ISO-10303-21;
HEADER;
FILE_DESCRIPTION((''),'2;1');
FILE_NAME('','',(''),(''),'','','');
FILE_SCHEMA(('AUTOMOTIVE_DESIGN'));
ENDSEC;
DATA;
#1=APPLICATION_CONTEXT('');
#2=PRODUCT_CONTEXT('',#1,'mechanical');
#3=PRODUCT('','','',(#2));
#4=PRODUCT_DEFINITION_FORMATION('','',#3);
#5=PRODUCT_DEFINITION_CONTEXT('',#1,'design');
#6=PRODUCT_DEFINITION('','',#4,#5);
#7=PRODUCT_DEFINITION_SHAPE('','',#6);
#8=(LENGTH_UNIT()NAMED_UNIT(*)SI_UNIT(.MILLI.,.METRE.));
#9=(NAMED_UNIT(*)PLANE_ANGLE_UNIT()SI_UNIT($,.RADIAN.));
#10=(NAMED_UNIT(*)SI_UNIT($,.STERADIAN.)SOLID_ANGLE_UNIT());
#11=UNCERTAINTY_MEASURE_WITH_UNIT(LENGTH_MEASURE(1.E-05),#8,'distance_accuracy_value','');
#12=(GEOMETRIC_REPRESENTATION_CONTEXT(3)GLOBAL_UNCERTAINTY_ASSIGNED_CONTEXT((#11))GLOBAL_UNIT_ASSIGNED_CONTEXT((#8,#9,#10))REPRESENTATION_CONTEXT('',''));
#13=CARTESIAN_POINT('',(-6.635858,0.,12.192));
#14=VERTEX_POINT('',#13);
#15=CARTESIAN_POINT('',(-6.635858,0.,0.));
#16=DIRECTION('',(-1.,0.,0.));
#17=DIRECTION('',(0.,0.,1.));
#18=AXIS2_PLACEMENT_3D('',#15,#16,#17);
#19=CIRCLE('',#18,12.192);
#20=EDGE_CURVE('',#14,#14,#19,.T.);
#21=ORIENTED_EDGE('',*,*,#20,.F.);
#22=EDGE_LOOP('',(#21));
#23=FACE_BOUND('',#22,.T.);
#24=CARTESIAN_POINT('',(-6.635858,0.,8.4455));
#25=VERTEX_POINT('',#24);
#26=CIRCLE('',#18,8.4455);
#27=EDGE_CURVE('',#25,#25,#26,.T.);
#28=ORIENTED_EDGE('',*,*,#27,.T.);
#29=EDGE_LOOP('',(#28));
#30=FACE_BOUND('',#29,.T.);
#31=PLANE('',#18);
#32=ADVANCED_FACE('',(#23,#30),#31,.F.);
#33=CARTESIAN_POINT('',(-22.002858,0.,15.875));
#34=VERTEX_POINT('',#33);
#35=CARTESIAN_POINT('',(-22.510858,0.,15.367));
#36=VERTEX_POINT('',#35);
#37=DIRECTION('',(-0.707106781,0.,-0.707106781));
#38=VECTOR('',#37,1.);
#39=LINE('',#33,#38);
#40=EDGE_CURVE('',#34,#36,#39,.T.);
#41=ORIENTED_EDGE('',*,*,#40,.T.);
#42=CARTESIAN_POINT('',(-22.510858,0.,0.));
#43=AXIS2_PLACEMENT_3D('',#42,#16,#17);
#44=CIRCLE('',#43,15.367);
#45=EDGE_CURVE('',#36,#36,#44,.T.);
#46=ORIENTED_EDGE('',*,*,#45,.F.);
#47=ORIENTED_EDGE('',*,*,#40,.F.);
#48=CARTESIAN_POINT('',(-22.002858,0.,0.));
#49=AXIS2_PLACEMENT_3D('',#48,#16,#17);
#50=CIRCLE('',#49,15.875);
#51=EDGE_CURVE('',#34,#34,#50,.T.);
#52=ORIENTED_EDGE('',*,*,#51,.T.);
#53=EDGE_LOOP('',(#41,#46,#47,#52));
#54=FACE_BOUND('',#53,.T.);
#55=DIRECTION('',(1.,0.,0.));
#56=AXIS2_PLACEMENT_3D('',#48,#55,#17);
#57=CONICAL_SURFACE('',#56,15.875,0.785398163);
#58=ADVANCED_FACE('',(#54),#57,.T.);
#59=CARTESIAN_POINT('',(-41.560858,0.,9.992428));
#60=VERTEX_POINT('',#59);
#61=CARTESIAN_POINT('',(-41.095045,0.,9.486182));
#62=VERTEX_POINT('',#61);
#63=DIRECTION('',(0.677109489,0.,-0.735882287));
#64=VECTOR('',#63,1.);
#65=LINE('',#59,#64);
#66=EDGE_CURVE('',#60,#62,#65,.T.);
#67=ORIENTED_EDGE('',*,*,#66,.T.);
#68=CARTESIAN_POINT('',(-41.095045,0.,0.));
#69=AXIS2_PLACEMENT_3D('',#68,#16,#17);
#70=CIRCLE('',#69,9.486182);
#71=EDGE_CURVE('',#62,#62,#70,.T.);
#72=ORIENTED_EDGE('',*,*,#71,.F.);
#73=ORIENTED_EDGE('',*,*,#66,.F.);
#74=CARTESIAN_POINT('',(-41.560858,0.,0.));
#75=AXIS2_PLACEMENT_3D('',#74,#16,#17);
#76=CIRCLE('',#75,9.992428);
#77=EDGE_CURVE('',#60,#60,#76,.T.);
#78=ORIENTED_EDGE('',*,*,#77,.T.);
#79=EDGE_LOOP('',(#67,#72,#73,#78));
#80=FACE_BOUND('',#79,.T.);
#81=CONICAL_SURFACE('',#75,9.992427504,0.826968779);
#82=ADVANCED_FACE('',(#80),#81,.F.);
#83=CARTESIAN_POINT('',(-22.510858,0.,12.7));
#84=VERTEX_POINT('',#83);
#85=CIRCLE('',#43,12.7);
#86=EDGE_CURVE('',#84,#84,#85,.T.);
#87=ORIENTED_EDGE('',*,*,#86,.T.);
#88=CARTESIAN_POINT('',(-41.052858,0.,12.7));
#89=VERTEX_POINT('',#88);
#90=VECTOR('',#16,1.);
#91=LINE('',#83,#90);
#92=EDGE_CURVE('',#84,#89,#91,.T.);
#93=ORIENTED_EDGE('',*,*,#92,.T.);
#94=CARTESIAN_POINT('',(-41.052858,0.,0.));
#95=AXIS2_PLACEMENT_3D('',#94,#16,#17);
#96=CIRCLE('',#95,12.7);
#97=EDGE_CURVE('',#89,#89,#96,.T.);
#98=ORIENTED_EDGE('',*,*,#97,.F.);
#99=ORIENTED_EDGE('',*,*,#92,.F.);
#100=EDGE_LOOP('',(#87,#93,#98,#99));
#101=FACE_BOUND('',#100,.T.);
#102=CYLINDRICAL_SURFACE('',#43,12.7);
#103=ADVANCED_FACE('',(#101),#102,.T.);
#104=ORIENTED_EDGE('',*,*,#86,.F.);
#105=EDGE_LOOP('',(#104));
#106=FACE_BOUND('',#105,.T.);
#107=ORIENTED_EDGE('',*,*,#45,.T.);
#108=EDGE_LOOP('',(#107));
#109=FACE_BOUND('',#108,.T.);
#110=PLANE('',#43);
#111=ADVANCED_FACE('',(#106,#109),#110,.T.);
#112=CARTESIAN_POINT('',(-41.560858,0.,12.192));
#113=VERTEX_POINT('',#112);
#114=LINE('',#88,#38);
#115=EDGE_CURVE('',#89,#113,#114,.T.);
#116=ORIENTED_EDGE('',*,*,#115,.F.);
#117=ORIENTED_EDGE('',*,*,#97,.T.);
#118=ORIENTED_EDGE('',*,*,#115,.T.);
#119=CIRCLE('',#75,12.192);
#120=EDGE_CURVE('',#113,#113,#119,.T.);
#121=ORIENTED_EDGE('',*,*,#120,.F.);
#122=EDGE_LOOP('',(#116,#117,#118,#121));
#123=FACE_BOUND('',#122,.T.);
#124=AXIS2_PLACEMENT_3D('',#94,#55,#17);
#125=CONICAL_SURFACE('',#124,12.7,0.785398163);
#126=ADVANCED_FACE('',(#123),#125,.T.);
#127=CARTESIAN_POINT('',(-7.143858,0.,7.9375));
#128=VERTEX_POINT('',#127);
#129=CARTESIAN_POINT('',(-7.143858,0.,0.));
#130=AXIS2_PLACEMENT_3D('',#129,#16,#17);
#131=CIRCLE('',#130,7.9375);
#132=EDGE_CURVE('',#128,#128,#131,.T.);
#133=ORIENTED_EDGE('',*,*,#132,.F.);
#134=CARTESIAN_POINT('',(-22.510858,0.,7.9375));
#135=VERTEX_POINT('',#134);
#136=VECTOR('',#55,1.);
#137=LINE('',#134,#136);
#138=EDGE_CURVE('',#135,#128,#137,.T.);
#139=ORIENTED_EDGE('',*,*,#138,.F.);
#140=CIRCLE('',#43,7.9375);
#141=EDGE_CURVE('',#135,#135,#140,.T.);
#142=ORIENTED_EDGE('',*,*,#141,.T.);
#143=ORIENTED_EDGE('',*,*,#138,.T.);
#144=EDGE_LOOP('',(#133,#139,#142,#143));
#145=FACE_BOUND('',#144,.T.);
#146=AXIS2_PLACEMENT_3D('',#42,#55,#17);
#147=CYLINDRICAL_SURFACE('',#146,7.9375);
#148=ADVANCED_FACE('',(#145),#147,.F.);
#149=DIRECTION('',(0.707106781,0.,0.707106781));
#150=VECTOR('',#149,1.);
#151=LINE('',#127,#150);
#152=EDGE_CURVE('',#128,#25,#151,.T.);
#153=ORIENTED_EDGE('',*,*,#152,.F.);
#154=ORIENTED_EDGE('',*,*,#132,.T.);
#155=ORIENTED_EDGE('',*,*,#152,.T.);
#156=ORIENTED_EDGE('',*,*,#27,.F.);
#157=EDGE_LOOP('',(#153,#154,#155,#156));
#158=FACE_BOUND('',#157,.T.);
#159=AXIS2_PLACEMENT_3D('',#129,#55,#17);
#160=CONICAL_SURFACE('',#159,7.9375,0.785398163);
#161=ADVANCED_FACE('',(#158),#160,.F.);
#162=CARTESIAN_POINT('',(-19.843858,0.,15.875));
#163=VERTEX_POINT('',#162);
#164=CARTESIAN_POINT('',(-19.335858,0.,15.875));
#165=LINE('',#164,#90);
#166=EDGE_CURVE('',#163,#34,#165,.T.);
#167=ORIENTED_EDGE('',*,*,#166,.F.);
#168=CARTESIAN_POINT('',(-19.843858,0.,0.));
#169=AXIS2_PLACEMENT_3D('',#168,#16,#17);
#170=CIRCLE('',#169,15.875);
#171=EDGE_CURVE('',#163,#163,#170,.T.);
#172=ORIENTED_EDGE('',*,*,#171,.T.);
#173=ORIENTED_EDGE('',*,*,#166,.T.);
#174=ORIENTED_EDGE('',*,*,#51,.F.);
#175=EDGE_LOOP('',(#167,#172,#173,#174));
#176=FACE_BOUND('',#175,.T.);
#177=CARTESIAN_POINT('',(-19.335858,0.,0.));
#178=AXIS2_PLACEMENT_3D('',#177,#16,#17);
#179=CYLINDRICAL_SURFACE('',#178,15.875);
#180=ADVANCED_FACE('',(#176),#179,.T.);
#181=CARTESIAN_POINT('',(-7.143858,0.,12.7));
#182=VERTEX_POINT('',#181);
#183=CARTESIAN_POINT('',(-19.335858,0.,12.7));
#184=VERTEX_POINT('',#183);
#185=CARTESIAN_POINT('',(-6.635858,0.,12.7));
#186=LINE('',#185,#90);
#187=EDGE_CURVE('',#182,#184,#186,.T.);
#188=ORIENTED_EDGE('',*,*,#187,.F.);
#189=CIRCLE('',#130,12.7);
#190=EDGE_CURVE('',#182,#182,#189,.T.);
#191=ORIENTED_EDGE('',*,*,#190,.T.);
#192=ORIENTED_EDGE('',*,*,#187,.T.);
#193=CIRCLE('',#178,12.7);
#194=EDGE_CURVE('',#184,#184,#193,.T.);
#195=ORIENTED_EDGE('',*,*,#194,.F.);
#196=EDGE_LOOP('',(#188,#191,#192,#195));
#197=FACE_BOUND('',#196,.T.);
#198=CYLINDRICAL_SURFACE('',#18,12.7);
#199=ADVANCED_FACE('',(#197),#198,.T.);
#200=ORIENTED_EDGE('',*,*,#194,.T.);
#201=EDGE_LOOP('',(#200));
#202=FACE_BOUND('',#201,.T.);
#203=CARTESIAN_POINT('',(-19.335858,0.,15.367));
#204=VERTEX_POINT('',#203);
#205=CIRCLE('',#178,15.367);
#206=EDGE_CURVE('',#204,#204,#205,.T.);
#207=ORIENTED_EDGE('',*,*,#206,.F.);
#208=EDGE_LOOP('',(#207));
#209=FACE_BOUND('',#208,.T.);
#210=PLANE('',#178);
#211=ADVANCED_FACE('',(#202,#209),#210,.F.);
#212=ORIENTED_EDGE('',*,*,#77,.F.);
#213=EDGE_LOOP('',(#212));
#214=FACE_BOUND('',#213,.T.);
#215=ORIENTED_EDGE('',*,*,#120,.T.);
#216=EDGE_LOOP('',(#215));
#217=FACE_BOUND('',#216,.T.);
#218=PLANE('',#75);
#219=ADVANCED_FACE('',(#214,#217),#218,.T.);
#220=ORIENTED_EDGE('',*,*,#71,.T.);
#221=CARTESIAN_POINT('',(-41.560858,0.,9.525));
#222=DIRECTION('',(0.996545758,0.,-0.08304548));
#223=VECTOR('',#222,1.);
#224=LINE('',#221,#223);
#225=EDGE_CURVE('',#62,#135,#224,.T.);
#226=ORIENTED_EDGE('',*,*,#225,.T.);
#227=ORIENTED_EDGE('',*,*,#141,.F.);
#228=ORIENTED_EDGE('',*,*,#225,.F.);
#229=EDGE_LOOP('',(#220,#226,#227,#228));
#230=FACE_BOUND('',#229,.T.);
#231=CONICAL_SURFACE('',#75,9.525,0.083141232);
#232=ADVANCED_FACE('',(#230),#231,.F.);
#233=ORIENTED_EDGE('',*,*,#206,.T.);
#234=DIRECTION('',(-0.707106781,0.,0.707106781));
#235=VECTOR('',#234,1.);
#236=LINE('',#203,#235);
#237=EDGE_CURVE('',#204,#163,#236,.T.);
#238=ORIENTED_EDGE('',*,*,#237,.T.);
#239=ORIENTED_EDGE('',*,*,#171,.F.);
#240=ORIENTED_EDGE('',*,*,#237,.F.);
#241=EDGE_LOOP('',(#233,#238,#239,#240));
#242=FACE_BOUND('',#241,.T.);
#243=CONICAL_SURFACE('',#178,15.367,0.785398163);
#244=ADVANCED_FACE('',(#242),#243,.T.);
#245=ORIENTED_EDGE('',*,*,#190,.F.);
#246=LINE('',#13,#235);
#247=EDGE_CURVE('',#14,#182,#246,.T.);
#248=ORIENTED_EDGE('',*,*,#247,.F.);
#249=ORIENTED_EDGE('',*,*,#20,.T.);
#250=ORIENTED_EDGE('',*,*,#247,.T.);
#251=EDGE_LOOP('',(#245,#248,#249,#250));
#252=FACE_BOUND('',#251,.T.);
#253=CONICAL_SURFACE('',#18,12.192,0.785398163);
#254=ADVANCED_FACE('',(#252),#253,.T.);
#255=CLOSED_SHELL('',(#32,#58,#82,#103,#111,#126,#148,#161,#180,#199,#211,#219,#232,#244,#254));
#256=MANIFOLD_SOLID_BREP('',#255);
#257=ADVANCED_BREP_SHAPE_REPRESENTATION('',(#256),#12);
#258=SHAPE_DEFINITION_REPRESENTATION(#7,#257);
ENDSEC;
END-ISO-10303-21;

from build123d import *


# Not quite as in the source:
# - a fillet or chamfer that OpenCascade refuses, or shapes differently, is made with other operations: its cross-section is extruded or revolved along the edge and cut away or added


with BuildPart() as f1:
    # F0 (on Front) → F1 (revolve)
    with BuildSketch(Plane.XZ):
        Polygon((-22.5108576886, 12.7), (-41.5608576886, 12.7), (-41.5608576886, 9.525), (-22.5108576886, 7.9375), (-6.6358576886, 7.9375), (-6.6358576886, 12.7), (-19.3358576886, 12.7), (-19.3358576886, 15.875), (-22.5108576886, 15.875), align=None)
    revolve(axis=Axis((-22.7388739586, 0, 0), (-1, 0, 0)))

    # F2: chamfer of 0.508 on 6 edges, made by hand

    # F2_s1 → F2_t2 (revolve, cut)
    with BuildSketch(Plane.XZ):
        Polygon((-22.0028576886, 15.875), (-22.5108576886, 15.367), (-22.5108576886, 15.875), align=None)
    revolve(axis=Axis((-22.5108576886, 0, 0), (-1, 0, 0)), mode=Mode.SUBTRACT)

    # F2_s3 → F2_t4 (revolve, cut)
    with BuildSketch(Plane.XZ):
        Polygon((-19.3358576886, 15.367), (-19.8438576886, 15.875), (-19.3358576886, 15.875), align=None)
    revolve(axis=Axis((-19.3358576886, 0, 0), (-1, 0, 0)), mode=Mode.SUBTRACT)

    # F2_s5 → F2_t6 (revolve, cut)
    with BuildSketch(Plane.XZ):
        Polygon((-41.0528576886, 12.7), (-41.5608576886, 12.192), (-41.5608576886, 12.7), align=None)
    revolve(axis=Axis((-41.5608576886, 0, 0), (-1, 0, 0)), mode=Mode.SUBTRACT)

    # F2_s7 → F2_t8 (revolve, cut)
    with BuildSketch(Plane.XZ):
        Polygon((-6.6358576886, 12.192), (-7.1438576886, 12.7), (-6.6358576886, 12.7), align=None)
    revolve(axis=Axis((-6.6358576886, 0, 0), (-1, 0, 0)), mode=Mode.SUBTRACT)

    # F2_s9 → F2_t10 (revolve, cut)
    with BuildSketch(Plane.XZ):
        Polygon((-41.5608576886, 9.9924275038), (-41.0950447924, 9.4861822586), (-41.5608576886, 9.525), align=None)
    revolve(axis=Axis((-41.5608576886, 0, 0), (-1, 0, 0)), mode=Mode.SUBTRACT)

    # F2_s11 → F2_t12 (revolve, cut)
    with BuildSketch(Plane.XZ):
        Polygon((-7.1438576886, 7.9375), (-6.6358576886, 8.4455), (-6.6358576886, 7.9375), align=None)
    revolve(axis=Axis((-6.6358576886, 0, 0), (-1, 0, 0)), mode=Mode.SUBTRACT)


solid = f1.part
